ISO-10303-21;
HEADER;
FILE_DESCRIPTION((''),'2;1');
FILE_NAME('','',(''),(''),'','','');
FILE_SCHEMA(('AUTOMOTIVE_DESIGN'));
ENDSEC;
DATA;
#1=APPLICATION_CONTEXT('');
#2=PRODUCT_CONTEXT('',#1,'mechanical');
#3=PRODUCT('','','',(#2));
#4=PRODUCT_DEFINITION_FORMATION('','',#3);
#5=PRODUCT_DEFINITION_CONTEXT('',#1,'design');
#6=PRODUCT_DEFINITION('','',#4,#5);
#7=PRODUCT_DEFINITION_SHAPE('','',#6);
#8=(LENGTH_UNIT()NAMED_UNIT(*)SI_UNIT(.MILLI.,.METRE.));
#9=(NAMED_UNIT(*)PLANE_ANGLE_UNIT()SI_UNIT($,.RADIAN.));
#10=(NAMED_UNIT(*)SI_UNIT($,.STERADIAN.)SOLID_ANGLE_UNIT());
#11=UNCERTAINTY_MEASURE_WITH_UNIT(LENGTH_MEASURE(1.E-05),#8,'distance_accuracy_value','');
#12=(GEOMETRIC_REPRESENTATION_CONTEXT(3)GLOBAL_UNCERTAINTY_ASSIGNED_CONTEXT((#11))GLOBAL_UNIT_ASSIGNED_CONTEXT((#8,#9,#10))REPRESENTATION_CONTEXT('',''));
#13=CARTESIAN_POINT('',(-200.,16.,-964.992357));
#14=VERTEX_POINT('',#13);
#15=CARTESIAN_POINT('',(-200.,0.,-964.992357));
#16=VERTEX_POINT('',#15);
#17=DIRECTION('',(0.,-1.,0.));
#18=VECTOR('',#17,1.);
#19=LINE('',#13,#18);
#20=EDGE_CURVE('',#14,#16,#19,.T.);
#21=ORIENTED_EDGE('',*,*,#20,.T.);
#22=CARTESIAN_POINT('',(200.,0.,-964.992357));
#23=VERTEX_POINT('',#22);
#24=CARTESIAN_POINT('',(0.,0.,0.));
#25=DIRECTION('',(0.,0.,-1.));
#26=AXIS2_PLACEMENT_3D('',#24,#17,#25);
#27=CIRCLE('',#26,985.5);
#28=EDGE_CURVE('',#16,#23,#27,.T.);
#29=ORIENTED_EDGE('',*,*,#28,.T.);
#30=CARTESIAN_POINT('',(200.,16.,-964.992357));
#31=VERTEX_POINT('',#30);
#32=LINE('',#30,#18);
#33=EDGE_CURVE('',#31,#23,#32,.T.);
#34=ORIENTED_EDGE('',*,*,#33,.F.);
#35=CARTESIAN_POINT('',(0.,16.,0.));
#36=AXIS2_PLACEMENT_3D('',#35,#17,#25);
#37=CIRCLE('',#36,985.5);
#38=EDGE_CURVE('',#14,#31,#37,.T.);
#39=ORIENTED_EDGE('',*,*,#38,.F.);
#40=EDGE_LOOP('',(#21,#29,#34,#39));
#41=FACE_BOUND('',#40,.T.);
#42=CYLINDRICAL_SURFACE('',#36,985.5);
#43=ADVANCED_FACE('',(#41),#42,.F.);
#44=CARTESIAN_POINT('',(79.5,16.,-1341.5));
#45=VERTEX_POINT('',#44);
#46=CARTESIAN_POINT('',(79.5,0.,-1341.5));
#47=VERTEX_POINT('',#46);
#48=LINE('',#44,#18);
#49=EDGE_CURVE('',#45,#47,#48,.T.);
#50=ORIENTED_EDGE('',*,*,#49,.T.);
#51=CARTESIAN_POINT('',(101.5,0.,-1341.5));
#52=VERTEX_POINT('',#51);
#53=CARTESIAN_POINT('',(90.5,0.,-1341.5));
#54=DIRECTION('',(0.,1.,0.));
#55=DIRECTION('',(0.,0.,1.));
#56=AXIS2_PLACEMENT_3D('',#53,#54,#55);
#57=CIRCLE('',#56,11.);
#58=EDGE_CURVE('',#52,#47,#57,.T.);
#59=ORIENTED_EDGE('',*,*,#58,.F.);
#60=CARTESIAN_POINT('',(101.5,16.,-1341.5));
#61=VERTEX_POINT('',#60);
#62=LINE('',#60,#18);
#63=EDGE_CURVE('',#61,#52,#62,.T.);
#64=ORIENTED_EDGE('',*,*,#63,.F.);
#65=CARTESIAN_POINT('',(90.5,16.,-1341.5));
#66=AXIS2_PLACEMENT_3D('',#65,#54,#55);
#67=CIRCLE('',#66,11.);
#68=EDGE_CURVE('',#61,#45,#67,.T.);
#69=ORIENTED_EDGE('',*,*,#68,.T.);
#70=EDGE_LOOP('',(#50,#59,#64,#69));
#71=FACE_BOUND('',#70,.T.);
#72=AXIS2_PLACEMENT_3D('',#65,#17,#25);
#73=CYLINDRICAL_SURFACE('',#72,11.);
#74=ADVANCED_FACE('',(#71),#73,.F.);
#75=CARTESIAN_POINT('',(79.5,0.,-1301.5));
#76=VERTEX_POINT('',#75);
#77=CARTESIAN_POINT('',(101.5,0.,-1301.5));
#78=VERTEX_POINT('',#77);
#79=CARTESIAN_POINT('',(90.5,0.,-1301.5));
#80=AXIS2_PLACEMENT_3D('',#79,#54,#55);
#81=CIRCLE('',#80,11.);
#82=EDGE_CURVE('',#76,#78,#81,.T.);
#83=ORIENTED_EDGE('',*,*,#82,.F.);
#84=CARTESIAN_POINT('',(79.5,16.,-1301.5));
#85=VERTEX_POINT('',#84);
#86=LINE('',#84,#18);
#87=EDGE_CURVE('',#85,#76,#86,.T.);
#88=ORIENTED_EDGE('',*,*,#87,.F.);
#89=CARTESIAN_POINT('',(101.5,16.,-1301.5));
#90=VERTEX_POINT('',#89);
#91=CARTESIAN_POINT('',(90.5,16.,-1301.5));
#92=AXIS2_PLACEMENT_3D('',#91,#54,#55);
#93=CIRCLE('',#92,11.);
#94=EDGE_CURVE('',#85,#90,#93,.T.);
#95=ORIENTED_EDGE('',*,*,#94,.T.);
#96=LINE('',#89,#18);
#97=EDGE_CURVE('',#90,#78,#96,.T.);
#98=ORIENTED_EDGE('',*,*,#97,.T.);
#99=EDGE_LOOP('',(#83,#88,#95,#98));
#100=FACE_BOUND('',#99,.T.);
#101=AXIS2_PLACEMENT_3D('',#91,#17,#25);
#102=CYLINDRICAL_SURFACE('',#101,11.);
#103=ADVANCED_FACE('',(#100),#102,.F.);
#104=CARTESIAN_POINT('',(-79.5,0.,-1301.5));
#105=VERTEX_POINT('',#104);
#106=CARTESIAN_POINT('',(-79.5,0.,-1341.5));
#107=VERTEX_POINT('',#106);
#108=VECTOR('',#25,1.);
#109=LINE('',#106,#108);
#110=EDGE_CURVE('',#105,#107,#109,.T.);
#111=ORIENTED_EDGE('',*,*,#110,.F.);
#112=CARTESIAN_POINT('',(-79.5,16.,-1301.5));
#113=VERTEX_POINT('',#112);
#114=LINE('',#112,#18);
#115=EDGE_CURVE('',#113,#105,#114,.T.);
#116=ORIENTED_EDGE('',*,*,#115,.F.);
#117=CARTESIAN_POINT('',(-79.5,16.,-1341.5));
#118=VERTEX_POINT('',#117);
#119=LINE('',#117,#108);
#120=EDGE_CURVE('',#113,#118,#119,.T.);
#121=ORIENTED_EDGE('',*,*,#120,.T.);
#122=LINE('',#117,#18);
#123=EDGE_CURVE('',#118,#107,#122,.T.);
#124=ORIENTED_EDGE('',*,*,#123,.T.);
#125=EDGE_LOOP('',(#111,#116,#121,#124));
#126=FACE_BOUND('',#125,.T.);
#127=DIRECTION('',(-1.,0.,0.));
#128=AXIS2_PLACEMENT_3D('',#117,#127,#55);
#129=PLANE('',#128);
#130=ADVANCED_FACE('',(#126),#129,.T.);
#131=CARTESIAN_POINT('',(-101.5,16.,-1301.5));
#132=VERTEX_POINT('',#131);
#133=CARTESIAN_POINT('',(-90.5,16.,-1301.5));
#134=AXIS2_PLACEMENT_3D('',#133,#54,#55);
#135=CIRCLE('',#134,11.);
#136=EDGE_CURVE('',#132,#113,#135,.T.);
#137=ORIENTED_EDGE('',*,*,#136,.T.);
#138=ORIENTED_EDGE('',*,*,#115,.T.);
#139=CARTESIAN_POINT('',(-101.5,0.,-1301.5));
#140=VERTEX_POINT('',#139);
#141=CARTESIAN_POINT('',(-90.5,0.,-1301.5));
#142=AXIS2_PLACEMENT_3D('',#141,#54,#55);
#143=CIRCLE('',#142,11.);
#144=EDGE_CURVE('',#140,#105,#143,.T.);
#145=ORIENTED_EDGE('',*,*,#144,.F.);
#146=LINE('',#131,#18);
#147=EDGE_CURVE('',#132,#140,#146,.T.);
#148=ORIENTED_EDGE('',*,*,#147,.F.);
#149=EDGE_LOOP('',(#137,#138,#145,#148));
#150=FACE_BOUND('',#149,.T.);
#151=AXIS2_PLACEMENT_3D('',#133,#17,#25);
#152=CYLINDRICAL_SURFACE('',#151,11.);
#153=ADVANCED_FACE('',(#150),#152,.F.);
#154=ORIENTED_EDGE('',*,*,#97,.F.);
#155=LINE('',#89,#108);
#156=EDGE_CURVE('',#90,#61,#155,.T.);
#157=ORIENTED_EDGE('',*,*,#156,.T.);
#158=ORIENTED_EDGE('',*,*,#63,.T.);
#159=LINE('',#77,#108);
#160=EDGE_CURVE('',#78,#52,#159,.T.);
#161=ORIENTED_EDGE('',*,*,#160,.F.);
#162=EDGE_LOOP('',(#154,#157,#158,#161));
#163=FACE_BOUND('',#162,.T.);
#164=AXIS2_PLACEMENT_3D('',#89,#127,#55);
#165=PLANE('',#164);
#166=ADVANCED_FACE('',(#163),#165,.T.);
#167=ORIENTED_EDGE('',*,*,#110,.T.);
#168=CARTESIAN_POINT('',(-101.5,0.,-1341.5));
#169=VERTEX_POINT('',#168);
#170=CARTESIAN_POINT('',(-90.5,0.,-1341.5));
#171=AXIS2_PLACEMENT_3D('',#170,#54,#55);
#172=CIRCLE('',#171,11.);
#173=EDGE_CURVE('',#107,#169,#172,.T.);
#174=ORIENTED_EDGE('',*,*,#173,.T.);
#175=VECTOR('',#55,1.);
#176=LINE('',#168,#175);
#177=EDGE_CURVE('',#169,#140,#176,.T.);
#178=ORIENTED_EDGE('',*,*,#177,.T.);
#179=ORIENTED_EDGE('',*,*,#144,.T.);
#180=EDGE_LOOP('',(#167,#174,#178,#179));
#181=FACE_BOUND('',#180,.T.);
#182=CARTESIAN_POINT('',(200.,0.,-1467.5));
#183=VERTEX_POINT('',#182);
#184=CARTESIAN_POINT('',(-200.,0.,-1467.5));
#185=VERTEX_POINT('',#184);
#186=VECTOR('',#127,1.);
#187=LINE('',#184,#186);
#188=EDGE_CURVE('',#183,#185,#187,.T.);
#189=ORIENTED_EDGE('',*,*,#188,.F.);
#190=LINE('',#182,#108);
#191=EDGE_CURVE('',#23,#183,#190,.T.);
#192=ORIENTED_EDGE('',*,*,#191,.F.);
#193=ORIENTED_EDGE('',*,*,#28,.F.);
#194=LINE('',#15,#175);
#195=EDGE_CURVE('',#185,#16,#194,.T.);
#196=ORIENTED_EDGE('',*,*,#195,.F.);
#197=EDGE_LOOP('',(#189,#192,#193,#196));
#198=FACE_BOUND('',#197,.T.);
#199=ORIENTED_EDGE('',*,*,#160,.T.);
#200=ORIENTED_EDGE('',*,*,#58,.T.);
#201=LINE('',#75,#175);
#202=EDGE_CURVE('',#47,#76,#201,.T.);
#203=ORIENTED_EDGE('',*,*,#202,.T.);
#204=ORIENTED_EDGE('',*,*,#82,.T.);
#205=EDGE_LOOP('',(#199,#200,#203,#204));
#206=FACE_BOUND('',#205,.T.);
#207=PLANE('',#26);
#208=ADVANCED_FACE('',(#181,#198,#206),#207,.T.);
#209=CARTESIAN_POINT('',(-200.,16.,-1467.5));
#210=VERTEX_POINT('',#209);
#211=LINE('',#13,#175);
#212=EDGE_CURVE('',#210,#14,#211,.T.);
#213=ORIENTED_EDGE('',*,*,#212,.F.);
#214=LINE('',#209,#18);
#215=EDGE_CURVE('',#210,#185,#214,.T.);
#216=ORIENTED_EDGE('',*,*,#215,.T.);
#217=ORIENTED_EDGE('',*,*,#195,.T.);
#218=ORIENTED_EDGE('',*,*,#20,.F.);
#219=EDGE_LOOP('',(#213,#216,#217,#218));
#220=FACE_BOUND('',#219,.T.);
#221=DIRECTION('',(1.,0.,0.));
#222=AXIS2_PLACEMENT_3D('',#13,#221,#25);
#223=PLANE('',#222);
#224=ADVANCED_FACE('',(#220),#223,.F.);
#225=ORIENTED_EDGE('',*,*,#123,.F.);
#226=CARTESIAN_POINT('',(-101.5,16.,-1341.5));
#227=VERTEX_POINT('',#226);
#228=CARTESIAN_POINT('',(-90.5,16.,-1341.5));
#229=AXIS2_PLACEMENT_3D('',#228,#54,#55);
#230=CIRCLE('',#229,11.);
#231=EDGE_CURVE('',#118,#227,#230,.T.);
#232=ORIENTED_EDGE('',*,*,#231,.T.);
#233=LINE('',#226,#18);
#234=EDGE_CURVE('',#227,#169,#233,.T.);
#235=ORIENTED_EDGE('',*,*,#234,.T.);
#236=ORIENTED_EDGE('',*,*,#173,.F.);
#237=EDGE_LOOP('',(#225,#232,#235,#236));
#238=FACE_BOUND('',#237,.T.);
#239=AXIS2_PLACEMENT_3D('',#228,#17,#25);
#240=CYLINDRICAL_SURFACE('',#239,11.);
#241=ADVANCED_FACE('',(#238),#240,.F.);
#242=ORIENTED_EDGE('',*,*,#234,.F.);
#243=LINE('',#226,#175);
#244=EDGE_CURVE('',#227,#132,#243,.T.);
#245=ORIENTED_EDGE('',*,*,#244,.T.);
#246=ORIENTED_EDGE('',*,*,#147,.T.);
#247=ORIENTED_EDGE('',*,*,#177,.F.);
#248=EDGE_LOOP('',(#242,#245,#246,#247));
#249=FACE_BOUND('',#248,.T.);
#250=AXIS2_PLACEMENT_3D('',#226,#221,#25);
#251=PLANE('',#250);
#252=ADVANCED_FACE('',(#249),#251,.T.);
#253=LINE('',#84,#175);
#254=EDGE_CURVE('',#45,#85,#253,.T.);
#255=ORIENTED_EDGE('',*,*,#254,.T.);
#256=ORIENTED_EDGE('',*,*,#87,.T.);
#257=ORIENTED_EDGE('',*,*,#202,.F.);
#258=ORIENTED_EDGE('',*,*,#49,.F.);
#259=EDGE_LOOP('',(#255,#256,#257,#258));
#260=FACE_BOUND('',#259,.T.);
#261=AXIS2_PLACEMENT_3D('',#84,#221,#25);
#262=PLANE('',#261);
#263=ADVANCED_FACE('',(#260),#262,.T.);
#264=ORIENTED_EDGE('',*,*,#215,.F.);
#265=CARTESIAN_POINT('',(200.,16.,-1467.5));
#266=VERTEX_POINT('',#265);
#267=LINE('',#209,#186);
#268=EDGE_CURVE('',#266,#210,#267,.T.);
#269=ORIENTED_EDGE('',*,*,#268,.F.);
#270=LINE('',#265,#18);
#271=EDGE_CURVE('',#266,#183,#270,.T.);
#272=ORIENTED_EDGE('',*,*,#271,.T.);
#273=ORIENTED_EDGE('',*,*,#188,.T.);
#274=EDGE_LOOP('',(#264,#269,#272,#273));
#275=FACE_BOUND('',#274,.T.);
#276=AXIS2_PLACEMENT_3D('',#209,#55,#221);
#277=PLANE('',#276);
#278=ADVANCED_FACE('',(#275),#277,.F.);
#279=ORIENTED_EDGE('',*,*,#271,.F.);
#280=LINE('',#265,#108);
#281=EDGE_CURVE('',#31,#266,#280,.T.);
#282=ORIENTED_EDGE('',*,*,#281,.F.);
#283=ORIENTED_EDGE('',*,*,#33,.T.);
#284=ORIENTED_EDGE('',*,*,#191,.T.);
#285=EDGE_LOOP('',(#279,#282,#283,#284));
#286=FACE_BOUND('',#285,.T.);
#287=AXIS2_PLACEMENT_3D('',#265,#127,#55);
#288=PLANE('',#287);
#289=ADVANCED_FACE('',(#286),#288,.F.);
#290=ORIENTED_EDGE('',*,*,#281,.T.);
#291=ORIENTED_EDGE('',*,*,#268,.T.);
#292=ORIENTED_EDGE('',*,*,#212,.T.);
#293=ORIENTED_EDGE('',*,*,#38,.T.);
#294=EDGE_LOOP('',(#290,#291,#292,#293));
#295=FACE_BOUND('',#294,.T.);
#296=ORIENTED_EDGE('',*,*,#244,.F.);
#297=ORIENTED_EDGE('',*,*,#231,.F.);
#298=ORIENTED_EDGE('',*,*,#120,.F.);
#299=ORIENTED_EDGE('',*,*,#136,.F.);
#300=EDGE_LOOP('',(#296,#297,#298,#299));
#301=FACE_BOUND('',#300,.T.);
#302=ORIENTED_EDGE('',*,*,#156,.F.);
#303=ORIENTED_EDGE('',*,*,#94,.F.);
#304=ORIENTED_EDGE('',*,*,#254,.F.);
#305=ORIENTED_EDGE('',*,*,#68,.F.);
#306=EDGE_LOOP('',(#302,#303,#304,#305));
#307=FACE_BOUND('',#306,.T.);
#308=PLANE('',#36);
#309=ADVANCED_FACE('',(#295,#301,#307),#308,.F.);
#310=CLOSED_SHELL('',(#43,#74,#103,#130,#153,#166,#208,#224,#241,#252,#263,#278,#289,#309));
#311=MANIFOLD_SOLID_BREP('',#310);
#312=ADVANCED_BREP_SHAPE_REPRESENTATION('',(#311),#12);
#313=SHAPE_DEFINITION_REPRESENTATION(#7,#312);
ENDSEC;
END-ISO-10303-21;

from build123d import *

# Parameters (mm, degrees)
SM_BASE_FLANGE_1_DEPTH = 16


# Sheet-metal steps are written as plain solids
with BuildPart() as part:
    # Sketch 1 → 基体-法兰1 (new body)
    with BuildSketch(Plane(origin=(0, 0, 0), x_dir=(1, 0, 0), z_dir=(0, 1, 0))):
        with BuildLine():
            Line((-200, 964.992357483), (-200, 1467.5))
            Line((-200, 1467.5), (200, 1467.5))
            Line((200, 1467.5), (200, 964.992357483))
            ThreePointArc((200, 964.992357483), (0, 985.5), (-200, 964.992357483))
        make_face()
        with BuildLine():
            Line((-79.5, 1341.5), (-79.5, 1301.5))
            ThreePointArc((-79.5, 1301.5), (-90.5, 1290.5), (-101.5, 1301.5))
            Line((-101.5, 1301.5), (-101.5, 1341.5))
            ThreePointArc((-101.5, 1341.5), (-90.5, 1352.5), (-79.5, 1341.5))
        make_face(mode=Mode.SUBTRACT)
        with BuildLine():
            Line((79.5, 1301.5), (79.5, 1341.5))
            ThreePointArc((79.5, 1341.5), (90.5, 1352.5), (101.5, 1341.5))
            Line((101.5, 1341.5), (101.5, 1301.5))
            ThreePointArc((101.5, 1301.5), (90.5, 1290.5), (79.5, 1301.5))
        make_face(mode=Mode.SUBTRACT)
    extrude(amount=SM_BASE_FLANGE_1_DEPTH)


solid = part.part
